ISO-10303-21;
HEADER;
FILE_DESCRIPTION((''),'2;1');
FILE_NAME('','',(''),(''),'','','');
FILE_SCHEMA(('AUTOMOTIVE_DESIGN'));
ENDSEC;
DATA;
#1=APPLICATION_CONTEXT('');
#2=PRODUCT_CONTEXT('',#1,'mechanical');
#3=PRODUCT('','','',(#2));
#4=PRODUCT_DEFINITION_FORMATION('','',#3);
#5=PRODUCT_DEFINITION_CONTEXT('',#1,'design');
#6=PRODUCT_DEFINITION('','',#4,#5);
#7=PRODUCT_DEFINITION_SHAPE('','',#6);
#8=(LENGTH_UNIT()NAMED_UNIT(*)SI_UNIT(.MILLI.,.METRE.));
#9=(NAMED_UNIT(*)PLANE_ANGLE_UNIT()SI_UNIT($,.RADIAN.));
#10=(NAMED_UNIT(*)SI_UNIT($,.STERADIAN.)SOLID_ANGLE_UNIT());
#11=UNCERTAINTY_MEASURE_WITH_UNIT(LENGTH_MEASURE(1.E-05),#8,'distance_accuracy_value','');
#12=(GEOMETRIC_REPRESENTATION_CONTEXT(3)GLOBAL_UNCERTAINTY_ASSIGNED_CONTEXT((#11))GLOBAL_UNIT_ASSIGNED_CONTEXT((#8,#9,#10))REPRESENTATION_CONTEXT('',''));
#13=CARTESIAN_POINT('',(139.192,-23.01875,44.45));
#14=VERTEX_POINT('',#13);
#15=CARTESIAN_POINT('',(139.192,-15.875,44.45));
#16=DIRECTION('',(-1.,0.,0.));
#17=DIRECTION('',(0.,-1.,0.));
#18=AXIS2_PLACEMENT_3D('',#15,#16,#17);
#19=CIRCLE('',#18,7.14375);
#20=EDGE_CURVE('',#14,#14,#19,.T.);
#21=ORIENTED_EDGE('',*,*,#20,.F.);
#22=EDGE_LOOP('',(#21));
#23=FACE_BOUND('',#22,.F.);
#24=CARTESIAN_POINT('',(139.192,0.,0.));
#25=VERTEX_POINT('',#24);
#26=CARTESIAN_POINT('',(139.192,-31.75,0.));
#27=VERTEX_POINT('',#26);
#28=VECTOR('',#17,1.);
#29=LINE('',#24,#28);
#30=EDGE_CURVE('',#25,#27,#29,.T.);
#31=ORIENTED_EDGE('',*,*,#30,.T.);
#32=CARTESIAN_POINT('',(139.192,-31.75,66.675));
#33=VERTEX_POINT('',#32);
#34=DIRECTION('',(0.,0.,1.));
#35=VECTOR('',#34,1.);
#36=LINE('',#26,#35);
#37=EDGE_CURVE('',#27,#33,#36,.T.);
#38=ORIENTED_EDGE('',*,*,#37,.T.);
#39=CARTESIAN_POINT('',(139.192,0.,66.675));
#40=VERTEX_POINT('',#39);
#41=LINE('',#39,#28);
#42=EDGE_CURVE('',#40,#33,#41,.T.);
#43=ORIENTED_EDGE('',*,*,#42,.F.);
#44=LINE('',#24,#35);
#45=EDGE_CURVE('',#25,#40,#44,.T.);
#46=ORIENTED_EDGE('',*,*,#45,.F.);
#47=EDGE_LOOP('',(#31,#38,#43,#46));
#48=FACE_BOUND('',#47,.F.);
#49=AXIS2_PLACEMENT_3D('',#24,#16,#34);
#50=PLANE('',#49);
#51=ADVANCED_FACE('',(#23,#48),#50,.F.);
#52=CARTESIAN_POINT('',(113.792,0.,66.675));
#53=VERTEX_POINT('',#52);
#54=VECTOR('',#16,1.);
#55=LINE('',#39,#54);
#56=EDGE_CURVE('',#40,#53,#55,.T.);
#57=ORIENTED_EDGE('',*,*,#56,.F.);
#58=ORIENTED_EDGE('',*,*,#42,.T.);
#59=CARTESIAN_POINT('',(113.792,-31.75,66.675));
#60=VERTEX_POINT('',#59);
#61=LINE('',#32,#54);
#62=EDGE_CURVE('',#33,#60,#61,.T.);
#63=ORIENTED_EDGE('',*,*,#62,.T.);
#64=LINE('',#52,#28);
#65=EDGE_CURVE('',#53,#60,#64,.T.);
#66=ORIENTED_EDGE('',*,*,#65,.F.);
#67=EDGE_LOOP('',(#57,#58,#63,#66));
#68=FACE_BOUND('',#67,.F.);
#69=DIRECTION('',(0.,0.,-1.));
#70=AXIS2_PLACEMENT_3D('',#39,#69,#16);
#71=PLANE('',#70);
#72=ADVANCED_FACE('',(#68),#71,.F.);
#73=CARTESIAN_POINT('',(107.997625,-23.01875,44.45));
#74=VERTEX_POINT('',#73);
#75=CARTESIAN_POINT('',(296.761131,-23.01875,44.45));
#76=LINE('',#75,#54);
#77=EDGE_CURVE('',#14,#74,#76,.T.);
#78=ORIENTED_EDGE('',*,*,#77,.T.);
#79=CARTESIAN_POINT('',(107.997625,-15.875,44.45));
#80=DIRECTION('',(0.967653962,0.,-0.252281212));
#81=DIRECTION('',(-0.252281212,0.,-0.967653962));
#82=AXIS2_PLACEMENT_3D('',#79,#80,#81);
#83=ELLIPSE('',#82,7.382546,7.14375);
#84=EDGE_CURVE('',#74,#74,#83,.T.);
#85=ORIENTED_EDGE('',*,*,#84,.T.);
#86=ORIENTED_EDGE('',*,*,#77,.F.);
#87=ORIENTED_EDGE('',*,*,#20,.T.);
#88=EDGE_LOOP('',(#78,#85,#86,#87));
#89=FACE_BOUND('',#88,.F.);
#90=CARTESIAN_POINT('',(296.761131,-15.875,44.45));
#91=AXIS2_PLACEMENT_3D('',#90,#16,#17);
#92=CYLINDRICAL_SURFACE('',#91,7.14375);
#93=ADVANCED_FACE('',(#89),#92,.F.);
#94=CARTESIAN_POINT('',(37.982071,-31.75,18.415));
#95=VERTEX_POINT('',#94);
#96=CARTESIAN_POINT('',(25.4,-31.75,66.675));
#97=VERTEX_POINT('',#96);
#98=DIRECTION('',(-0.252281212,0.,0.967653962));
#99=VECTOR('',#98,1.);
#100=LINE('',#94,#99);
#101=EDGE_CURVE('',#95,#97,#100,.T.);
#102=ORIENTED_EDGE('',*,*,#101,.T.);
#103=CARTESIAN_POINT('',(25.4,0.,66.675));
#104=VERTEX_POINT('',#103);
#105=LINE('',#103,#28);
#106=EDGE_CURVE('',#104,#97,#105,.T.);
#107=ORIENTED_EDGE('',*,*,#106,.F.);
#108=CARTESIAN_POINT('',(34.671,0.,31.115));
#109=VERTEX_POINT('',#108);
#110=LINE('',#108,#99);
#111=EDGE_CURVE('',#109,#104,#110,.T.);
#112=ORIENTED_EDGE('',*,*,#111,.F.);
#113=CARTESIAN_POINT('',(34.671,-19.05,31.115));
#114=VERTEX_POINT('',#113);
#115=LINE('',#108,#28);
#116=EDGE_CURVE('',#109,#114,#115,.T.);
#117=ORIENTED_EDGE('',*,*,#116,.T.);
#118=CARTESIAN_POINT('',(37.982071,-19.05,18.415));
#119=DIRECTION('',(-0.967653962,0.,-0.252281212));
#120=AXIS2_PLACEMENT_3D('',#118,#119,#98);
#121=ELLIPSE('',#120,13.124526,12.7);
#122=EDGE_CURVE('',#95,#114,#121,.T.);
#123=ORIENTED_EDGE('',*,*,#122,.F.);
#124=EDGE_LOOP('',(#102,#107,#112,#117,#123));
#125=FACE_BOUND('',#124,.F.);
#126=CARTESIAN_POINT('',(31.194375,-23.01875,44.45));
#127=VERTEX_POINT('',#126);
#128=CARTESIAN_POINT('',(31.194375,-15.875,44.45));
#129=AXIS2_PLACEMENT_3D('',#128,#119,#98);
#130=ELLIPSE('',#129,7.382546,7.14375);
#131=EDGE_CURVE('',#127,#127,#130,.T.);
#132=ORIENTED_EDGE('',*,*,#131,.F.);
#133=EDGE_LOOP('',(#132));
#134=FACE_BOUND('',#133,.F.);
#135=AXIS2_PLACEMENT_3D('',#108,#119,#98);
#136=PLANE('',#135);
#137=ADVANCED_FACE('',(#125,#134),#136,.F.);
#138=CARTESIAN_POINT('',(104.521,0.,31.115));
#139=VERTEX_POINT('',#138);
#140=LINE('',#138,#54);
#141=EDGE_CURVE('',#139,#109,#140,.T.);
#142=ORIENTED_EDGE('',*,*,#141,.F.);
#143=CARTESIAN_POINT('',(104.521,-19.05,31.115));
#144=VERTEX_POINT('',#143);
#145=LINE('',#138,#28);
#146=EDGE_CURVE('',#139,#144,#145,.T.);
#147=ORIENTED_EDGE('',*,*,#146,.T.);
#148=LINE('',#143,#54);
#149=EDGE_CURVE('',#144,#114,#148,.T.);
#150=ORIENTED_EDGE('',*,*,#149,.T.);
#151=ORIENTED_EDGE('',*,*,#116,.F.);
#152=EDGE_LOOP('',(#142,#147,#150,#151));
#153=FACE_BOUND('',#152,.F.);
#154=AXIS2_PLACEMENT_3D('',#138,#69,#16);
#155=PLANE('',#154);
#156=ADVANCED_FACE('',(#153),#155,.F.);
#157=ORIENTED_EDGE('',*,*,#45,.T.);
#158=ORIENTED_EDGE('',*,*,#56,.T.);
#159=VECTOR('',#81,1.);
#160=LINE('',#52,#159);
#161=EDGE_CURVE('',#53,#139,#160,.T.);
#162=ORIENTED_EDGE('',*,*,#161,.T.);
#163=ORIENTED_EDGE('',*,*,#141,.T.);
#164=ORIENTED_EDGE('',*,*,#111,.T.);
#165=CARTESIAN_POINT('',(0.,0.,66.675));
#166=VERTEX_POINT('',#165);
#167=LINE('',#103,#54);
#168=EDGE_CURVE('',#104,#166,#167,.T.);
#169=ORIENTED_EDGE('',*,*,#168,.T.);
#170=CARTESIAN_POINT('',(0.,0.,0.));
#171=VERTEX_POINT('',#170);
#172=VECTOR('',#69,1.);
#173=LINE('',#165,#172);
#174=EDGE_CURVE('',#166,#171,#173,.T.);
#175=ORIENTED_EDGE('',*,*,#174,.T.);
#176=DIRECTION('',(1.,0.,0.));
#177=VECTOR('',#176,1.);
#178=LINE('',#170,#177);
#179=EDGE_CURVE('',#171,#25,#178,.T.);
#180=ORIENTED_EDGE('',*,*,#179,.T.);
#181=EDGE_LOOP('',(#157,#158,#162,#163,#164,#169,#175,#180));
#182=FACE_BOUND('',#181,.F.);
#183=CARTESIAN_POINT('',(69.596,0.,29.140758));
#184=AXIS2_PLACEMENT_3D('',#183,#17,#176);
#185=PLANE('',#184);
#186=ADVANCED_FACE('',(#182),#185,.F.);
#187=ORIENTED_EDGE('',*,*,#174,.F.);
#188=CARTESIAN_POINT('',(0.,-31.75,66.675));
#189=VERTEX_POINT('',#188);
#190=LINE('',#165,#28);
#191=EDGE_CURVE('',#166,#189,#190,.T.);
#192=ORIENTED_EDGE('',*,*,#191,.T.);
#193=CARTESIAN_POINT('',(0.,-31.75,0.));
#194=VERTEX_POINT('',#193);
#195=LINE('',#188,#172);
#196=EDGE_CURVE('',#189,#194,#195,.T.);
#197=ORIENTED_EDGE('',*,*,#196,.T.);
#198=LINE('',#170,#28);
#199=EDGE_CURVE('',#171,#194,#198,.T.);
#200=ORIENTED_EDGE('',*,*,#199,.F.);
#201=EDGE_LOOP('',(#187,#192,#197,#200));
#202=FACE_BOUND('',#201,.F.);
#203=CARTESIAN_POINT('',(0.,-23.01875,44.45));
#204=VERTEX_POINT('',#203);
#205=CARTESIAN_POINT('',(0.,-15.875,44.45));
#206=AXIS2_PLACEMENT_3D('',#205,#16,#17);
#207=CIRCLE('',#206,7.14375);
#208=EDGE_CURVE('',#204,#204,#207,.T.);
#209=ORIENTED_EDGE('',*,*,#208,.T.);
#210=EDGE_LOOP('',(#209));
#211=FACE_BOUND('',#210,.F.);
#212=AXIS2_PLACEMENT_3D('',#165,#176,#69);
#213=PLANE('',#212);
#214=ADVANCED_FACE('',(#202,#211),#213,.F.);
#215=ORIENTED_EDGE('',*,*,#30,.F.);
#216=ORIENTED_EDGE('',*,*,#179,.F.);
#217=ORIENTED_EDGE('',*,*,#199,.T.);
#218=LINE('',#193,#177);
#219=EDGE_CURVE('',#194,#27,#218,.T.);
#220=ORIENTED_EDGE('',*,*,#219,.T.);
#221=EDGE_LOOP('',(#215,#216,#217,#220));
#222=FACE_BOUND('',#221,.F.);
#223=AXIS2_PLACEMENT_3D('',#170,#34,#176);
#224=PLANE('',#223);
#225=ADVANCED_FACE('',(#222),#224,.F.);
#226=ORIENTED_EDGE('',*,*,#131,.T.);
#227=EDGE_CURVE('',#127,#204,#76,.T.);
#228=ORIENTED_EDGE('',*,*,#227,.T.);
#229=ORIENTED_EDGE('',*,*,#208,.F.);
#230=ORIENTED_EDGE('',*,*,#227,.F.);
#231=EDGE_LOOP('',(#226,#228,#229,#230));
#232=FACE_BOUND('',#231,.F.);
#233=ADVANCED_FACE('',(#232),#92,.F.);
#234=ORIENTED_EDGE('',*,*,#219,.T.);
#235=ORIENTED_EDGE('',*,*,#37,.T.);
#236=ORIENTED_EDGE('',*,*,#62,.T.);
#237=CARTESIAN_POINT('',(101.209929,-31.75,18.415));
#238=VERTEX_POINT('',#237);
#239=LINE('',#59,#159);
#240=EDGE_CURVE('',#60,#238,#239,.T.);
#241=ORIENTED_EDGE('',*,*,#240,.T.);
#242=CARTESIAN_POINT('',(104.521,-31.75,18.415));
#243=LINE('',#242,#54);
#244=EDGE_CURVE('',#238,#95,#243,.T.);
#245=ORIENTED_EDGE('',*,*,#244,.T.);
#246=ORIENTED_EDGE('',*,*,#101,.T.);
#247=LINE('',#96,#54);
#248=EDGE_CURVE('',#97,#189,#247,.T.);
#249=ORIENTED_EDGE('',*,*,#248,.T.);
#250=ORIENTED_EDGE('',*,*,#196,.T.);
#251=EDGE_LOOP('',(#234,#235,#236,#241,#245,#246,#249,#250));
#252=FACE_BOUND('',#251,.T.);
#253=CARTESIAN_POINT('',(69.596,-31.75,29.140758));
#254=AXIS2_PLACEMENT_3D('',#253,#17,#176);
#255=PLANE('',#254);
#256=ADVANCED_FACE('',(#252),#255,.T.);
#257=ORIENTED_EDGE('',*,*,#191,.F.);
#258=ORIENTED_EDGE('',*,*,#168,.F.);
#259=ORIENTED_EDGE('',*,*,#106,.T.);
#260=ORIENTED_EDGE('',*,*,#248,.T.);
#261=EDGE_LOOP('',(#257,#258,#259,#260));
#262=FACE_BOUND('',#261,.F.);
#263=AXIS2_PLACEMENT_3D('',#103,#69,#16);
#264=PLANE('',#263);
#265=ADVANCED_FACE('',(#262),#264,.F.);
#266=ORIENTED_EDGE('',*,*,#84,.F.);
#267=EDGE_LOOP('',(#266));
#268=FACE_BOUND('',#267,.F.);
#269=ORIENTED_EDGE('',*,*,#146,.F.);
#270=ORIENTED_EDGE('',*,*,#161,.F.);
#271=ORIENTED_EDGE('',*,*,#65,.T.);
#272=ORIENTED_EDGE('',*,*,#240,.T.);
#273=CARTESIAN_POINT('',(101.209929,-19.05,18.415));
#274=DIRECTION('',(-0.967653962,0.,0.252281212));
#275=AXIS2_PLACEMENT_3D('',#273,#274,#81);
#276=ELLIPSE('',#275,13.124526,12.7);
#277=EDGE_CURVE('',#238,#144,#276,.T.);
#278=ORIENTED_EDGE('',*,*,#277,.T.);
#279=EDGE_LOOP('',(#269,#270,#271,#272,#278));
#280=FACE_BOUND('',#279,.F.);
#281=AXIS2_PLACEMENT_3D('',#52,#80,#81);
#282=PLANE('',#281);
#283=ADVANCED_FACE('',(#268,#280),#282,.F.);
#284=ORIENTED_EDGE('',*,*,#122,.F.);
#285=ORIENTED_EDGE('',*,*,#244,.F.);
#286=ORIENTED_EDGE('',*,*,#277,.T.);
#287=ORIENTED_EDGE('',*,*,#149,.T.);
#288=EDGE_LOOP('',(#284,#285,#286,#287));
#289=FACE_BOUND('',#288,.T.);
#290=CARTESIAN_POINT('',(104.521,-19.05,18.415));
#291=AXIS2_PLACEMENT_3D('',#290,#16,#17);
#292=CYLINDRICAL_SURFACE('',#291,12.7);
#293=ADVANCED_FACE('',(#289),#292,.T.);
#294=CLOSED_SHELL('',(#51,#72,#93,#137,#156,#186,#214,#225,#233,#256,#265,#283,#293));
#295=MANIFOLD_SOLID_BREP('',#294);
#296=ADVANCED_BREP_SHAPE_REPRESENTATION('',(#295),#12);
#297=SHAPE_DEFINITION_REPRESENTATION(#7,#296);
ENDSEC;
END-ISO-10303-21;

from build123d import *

# Parameters (mm, degrees)
F1_DEPTH = 31.75
F3_D     = 14.2875
F4_R     = 12.7


# Not quite as in the source:
# - a length typed as a fraction of an inch, garbled in the dataset ("3 / 203.2 mm" for 3/8 in), is restored


with BuildPart() as f1:
    # F0 (on Front) → F1 (new body)
    with BuildSketch(Plane.XZ):
        Polygon((0, 66.675), (0, 0), (139.192, 0), (139.192, 66.675), (113.792, 66.675), (104.521, 31.115), (34.671, 31.115), (25.4, 66.675), align=None)
    extrude(amount=F1_DEPTH)

    # F3 (through all)
    with Locations(Plane.YZ.offset(139.192)):
        with Locations((-15.875, 44.45)):
            Hole(F3_D / 2)

    # F4
    f4_edges = [f1.edges().sort_by_distance(p)[0] for p in [
        (69.596, -31.75, 31.115),
    ]]
    fillet(f4_edges, radius=F4_R)


solid = f1.part
